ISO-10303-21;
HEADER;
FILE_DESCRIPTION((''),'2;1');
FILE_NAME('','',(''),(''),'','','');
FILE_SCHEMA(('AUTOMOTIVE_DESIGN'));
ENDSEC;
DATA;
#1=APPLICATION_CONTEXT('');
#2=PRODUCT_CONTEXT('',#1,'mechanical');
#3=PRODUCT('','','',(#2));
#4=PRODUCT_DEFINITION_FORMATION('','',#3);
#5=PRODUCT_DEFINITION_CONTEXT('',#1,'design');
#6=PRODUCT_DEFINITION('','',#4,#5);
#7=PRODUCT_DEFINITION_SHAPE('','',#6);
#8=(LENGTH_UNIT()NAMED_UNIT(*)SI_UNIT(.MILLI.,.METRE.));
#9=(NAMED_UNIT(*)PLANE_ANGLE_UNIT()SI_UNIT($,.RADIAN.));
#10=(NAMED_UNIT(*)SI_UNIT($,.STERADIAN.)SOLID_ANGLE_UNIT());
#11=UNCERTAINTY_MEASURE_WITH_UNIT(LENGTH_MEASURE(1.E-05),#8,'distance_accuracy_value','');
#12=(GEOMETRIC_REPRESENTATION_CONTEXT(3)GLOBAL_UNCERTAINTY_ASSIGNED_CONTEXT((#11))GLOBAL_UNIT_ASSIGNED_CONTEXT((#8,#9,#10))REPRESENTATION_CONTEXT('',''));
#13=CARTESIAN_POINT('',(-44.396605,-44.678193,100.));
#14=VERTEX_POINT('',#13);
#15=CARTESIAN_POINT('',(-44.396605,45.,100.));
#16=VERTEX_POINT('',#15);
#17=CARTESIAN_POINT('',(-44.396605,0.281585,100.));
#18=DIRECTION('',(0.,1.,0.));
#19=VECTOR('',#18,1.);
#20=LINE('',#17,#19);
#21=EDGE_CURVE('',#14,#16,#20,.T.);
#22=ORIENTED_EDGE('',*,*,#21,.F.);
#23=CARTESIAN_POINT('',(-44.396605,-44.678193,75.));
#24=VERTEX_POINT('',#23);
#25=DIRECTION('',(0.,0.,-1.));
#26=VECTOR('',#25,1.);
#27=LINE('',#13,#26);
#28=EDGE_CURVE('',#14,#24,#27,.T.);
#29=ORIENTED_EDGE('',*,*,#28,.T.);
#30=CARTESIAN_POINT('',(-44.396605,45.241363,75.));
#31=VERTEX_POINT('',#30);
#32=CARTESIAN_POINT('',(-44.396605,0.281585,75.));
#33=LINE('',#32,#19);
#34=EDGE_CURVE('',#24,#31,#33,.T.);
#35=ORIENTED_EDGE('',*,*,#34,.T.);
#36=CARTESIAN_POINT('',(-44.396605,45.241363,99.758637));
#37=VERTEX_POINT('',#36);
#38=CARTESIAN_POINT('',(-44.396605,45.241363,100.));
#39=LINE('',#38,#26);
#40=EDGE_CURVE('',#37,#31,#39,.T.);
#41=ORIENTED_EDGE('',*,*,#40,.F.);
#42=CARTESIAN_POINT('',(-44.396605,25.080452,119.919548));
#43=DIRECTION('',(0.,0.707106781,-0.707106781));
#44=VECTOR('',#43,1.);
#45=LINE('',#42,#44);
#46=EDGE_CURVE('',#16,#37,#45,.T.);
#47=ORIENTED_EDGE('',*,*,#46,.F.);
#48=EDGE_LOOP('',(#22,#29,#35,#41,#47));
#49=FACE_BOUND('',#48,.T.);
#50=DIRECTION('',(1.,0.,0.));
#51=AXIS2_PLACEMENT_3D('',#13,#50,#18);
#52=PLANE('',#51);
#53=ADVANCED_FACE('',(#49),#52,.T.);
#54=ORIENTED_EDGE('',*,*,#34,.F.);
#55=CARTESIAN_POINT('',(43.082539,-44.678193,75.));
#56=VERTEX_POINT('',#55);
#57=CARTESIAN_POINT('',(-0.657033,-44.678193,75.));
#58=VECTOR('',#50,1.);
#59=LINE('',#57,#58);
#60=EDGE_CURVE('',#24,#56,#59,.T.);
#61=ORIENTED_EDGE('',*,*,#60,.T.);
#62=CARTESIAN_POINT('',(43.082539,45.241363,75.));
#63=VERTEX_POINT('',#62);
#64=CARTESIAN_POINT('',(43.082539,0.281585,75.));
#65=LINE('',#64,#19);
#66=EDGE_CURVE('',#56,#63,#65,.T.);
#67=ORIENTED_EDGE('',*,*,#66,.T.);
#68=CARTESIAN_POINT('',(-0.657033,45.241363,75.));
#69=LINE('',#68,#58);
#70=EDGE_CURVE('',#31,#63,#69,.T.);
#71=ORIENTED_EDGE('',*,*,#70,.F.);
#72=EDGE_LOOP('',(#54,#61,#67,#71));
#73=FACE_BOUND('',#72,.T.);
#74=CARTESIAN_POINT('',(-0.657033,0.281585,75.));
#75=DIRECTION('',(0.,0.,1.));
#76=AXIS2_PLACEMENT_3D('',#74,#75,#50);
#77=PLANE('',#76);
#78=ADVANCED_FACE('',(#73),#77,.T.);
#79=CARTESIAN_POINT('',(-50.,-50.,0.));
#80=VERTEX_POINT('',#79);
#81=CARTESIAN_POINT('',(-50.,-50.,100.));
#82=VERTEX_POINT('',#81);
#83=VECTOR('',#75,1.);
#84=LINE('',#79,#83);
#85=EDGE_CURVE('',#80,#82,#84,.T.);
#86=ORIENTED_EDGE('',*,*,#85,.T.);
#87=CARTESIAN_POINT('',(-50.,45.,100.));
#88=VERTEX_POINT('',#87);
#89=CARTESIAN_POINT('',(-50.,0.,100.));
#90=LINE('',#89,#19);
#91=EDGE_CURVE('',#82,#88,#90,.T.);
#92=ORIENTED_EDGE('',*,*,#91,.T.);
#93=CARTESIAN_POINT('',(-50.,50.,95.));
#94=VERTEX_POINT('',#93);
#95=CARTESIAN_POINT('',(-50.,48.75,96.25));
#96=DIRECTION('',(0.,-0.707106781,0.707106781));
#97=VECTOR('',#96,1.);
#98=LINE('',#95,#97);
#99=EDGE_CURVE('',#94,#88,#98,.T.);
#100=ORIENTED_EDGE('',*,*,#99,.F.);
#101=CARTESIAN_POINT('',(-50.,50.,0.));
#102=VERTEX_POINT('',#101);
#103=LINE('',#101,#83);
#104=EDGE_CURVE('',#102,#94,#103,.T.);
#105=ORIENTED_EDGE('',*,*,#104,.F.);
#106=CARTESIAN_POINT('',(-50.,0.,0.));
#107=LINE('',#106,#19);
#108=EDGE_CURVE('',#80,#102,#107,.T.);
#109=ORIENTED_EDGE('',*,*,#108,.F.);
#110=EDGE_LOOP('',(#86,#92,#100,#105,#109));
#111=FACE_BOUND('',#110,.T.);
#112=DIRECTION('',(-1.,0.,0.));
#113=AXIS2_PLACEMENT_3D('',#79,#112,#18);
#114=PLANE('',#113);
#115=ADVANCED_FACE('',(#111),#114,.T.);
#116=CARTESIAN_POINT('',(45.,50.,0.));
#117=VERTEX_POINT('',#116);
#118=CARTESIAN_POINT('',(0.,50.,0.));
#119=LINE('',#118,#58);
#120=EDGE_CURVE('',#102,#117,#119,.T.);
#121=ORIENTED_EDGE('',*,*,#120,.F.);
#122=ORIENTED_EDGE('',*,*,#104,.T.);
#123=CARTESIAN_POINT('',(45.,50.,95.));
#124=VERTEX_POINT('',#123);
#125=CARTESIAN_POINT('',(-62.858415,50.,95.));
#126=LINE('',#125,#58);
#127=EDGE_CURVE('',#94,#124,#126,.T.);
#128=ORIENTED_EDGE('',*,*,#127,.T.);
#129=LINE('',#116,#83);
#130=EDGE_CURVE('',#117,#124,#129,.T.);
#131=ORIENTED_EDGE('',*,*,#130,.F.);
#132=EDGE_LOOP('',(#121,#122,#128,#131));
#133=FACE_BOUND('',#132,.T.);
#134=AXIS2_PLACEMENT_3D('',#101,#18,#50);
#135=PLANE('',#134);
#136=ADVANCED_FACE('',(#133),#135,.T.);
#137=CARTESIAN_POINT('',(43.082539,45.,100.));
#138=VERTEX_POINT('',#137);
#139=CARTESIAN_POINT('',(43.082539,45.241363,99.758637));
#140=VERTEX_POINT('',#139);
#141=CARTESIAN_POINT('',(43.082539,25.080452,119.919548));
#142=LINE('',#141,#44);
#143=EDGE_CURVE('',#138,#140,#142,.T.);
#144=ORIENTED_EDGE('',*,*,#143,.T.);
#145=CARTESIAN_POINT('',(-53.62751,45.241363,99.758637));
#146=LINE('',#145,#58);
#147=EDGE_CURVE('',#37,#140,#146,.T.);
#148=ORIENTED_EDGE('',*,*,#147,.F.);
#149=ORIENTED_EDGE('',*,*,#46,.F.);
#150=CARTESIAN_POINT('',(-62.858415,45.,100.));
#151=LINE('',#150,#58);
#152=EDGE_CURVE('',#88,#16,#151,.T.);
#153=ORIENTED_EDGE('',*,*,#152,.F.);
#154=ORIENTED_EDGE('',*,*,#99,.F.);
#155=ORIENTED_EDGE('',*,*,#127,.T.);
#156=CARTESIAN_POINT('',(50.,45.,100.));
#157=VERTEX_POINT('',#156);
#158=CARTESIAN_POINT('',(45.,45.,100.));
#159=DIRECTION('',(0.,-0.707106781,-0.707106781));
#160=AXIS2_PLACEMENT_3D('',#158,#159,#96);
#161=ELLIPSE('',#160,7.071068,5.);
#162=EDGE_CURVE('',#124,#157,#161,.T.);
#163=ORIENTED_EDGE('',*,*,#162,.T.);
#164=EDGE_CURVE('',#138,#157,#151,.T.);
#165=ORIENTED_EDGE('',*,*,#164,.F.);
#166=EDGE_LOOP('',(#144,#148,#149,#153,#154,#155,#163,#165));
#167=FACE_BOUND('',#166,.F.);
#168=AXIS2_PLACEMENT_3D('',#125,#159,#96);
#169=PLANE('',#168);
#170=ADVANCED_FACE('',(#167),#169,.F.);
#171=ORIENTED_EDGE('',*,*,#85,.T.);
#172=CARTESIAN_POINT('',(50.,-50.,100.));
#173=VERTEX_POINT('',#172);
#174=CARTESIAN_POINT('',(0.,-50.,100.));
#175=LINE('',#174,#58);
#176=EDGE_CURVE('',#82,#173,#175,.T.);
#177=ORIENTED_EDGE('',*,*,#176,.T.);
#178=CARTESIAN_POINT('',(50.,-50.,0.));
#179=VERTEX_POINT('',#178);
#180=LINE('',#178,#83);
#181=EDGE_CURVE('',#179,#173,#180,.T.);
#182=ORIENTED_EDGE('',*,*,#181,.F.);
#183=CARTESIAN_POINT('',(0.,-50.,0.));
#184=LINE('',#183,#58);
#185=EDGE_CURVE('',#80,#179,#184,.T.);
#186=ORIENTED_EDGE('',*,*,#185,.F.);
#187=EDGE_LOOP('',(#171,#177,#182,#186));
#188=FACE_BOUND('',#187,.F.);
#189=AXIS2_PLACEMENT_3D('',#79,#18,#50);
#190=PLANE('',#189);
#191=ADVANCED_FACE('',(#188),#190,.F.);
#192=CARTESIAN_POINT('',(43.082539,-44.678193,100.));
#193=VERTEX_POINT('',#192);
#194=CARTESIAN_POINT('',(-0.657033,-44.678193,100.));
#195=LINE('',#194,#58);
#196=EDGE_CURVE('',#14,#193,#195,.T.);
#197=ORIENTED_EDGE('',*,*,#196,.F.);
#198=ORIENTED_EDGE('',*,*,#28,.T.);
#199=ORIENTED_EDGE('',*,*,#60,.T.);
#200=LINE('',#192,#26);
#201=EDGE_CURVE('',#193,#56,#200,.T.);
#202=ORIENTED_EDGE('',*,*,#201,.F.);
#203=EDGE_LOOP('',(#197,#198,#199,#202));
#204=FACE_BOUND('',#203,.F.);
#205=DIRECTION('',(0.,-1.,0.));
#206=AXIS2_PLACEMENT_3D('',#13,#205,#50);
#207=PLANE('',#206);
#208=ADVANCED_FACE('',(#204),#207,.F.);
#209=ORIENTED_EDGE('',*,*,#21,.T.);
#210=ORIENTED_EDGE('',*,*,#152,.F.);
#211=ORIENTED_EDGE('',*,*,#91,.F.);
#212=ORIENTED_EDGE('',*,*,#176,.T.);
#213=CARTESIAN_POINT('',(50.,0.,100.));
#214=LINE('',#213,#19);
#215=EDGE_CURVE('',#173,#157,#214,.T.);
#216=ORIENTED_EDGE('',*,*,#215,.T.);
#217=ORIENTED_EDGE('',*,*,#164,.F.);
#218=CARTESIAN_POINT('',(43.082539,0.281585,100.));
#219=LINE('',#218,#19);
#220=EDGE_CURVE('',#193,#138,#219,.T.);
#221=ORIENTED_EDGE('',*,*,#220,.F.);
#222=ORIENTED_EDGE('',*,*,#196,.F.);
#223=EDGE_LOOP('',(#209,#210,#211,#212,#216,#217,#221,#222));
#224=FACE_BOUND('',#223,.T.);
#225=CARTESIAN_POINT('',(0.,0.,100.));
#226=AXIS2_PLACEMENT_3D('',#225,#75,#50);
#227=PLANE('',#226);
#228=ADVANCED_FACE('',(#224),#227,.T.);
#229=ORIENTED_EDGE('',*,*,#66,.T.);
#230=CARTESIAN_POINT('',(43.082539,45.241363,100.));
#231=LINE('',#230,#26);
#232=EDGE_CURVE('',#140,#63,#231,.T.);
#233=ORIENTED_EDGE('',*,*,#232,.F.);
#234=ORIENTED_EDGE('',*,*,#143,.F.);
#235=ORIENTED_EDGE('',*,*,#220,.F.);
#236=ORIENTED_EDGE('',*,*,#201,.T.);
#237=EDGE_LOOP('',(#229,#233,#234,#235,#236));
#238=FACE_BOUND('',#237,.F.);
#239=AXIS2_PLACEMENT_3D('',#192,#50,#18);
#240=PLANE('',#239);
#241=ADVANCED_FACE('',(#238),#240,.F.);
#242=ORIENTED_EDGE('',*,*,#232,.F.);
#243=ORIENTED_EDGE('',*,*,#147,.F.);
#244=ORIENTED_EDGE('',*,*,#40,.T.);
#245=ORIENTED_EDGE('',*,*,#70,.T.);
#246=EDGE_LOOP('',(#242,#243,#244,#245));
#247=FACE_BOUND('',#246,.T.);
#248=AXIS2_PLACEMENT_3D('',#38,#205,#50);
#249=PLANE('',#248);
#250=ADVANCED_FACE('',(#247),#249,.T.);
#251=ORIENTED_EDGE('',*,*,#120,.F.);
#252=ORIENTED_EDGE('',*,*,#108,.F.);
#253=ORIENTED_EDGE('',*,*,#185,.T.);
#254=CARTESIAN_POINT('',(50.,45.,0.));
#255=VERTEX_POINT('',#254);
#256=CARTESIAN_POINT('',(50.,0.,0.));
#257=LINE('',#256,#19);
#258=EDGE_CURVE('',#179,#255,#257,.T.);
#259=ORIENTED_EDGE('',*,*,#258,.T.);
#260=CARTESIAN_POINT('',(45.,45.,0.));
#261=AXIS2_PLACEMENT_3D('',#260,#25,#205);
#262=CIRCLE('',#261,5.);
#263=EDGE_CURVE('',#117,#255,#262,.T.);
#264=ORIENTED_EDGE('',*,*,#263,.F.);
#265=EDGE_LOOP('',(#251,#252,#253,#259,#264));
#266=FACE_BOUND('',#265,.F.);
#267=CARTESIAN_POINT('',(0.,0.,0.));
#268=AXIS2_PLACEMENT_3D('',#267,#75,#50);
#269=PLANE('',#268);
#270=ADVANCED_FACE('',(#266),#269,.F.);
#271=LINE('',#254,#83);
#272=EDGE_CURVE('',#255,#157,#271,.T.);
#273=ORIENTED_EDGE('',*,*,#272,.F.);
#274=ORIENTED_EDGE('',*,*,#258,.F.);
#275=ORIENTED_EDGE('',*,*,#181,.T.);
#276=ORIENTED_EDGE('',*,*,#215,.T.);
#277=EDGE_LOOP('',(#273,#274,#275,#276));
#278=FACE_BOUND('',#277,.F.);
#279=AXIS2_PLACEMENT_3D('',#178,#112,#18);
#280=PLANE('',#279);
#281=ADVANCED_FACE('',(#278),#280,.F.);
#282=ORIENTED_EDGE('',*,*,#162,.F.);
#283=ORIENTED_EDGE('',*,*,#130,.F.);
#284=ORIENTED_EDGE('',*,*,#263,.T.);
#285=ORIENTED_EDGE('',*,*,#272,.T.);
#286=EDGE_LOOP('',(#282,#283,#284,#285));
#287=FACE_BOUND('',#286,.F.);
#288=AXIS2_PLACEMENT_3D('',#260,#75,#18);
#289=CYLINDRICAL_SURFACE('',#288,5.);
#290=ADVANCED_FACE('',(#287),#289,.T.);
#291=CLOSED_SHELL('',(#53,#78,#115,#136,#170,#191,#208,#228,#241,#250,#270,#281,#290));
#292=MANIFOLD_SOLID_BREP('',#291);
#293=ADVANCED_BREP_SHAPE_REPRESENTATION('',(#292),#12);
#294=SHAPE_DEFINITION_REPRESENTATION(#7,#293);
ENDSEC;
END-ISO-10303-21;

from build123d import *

# Parameters (mm, degrees)
F0_W        = 100
F0_H        = 100
F1_DEPTH    = 100
F2_W        = 87.4791443348
F2_H        = 89.9195559323
F3_DEPTH    = 25
F4_T1_DEPTH = 125.7168298797
F5_R        = 5


# Not quite as in the source:
# - a fillet or chamfer that OpenCascade refuses, or shapes differently, is made with other operations: its cross-section is extruded or revolved along the edge and cut away or added


with BuildPart() as f1:
    # F0 (on Top) → F1 (new body)
    with BuildSketch(Plane.XY):
        Rectangle(F0_W, F0_H)
    extrude(amount=F1_DEPTH)

    # F2 (on face) → F3 (cut)
    with BuildSketch(Plane.XY.offset(100)):
        with Locations((-0.6570331752, 0.2815853804)):
            Rectangle(F2_W, F2_H)
    extrude(amount=-F3_DEPTH, mode=Mode.SUBTRACT)

    # F4: chamfer of 5 on 1 edges, made by hand

    # F4_s2 → F4_t1 (cut)
    with BuildSketch(Plane.YZ.offset(-62.8584149398)):
        Polygon((50, 95), (45, 100), (50, 100), align=None)
    extrude(amount=F4_T1_DEPTH, mode=Mode.SUBTRACT)

    # F5
    f5_edges = [f1.edges().sort_by_distance(p)[0] for p in [
        (50, 50, 47.5),
    ]]
    fillet(f5_edges, radius=F5_R)


solid = f1.part
